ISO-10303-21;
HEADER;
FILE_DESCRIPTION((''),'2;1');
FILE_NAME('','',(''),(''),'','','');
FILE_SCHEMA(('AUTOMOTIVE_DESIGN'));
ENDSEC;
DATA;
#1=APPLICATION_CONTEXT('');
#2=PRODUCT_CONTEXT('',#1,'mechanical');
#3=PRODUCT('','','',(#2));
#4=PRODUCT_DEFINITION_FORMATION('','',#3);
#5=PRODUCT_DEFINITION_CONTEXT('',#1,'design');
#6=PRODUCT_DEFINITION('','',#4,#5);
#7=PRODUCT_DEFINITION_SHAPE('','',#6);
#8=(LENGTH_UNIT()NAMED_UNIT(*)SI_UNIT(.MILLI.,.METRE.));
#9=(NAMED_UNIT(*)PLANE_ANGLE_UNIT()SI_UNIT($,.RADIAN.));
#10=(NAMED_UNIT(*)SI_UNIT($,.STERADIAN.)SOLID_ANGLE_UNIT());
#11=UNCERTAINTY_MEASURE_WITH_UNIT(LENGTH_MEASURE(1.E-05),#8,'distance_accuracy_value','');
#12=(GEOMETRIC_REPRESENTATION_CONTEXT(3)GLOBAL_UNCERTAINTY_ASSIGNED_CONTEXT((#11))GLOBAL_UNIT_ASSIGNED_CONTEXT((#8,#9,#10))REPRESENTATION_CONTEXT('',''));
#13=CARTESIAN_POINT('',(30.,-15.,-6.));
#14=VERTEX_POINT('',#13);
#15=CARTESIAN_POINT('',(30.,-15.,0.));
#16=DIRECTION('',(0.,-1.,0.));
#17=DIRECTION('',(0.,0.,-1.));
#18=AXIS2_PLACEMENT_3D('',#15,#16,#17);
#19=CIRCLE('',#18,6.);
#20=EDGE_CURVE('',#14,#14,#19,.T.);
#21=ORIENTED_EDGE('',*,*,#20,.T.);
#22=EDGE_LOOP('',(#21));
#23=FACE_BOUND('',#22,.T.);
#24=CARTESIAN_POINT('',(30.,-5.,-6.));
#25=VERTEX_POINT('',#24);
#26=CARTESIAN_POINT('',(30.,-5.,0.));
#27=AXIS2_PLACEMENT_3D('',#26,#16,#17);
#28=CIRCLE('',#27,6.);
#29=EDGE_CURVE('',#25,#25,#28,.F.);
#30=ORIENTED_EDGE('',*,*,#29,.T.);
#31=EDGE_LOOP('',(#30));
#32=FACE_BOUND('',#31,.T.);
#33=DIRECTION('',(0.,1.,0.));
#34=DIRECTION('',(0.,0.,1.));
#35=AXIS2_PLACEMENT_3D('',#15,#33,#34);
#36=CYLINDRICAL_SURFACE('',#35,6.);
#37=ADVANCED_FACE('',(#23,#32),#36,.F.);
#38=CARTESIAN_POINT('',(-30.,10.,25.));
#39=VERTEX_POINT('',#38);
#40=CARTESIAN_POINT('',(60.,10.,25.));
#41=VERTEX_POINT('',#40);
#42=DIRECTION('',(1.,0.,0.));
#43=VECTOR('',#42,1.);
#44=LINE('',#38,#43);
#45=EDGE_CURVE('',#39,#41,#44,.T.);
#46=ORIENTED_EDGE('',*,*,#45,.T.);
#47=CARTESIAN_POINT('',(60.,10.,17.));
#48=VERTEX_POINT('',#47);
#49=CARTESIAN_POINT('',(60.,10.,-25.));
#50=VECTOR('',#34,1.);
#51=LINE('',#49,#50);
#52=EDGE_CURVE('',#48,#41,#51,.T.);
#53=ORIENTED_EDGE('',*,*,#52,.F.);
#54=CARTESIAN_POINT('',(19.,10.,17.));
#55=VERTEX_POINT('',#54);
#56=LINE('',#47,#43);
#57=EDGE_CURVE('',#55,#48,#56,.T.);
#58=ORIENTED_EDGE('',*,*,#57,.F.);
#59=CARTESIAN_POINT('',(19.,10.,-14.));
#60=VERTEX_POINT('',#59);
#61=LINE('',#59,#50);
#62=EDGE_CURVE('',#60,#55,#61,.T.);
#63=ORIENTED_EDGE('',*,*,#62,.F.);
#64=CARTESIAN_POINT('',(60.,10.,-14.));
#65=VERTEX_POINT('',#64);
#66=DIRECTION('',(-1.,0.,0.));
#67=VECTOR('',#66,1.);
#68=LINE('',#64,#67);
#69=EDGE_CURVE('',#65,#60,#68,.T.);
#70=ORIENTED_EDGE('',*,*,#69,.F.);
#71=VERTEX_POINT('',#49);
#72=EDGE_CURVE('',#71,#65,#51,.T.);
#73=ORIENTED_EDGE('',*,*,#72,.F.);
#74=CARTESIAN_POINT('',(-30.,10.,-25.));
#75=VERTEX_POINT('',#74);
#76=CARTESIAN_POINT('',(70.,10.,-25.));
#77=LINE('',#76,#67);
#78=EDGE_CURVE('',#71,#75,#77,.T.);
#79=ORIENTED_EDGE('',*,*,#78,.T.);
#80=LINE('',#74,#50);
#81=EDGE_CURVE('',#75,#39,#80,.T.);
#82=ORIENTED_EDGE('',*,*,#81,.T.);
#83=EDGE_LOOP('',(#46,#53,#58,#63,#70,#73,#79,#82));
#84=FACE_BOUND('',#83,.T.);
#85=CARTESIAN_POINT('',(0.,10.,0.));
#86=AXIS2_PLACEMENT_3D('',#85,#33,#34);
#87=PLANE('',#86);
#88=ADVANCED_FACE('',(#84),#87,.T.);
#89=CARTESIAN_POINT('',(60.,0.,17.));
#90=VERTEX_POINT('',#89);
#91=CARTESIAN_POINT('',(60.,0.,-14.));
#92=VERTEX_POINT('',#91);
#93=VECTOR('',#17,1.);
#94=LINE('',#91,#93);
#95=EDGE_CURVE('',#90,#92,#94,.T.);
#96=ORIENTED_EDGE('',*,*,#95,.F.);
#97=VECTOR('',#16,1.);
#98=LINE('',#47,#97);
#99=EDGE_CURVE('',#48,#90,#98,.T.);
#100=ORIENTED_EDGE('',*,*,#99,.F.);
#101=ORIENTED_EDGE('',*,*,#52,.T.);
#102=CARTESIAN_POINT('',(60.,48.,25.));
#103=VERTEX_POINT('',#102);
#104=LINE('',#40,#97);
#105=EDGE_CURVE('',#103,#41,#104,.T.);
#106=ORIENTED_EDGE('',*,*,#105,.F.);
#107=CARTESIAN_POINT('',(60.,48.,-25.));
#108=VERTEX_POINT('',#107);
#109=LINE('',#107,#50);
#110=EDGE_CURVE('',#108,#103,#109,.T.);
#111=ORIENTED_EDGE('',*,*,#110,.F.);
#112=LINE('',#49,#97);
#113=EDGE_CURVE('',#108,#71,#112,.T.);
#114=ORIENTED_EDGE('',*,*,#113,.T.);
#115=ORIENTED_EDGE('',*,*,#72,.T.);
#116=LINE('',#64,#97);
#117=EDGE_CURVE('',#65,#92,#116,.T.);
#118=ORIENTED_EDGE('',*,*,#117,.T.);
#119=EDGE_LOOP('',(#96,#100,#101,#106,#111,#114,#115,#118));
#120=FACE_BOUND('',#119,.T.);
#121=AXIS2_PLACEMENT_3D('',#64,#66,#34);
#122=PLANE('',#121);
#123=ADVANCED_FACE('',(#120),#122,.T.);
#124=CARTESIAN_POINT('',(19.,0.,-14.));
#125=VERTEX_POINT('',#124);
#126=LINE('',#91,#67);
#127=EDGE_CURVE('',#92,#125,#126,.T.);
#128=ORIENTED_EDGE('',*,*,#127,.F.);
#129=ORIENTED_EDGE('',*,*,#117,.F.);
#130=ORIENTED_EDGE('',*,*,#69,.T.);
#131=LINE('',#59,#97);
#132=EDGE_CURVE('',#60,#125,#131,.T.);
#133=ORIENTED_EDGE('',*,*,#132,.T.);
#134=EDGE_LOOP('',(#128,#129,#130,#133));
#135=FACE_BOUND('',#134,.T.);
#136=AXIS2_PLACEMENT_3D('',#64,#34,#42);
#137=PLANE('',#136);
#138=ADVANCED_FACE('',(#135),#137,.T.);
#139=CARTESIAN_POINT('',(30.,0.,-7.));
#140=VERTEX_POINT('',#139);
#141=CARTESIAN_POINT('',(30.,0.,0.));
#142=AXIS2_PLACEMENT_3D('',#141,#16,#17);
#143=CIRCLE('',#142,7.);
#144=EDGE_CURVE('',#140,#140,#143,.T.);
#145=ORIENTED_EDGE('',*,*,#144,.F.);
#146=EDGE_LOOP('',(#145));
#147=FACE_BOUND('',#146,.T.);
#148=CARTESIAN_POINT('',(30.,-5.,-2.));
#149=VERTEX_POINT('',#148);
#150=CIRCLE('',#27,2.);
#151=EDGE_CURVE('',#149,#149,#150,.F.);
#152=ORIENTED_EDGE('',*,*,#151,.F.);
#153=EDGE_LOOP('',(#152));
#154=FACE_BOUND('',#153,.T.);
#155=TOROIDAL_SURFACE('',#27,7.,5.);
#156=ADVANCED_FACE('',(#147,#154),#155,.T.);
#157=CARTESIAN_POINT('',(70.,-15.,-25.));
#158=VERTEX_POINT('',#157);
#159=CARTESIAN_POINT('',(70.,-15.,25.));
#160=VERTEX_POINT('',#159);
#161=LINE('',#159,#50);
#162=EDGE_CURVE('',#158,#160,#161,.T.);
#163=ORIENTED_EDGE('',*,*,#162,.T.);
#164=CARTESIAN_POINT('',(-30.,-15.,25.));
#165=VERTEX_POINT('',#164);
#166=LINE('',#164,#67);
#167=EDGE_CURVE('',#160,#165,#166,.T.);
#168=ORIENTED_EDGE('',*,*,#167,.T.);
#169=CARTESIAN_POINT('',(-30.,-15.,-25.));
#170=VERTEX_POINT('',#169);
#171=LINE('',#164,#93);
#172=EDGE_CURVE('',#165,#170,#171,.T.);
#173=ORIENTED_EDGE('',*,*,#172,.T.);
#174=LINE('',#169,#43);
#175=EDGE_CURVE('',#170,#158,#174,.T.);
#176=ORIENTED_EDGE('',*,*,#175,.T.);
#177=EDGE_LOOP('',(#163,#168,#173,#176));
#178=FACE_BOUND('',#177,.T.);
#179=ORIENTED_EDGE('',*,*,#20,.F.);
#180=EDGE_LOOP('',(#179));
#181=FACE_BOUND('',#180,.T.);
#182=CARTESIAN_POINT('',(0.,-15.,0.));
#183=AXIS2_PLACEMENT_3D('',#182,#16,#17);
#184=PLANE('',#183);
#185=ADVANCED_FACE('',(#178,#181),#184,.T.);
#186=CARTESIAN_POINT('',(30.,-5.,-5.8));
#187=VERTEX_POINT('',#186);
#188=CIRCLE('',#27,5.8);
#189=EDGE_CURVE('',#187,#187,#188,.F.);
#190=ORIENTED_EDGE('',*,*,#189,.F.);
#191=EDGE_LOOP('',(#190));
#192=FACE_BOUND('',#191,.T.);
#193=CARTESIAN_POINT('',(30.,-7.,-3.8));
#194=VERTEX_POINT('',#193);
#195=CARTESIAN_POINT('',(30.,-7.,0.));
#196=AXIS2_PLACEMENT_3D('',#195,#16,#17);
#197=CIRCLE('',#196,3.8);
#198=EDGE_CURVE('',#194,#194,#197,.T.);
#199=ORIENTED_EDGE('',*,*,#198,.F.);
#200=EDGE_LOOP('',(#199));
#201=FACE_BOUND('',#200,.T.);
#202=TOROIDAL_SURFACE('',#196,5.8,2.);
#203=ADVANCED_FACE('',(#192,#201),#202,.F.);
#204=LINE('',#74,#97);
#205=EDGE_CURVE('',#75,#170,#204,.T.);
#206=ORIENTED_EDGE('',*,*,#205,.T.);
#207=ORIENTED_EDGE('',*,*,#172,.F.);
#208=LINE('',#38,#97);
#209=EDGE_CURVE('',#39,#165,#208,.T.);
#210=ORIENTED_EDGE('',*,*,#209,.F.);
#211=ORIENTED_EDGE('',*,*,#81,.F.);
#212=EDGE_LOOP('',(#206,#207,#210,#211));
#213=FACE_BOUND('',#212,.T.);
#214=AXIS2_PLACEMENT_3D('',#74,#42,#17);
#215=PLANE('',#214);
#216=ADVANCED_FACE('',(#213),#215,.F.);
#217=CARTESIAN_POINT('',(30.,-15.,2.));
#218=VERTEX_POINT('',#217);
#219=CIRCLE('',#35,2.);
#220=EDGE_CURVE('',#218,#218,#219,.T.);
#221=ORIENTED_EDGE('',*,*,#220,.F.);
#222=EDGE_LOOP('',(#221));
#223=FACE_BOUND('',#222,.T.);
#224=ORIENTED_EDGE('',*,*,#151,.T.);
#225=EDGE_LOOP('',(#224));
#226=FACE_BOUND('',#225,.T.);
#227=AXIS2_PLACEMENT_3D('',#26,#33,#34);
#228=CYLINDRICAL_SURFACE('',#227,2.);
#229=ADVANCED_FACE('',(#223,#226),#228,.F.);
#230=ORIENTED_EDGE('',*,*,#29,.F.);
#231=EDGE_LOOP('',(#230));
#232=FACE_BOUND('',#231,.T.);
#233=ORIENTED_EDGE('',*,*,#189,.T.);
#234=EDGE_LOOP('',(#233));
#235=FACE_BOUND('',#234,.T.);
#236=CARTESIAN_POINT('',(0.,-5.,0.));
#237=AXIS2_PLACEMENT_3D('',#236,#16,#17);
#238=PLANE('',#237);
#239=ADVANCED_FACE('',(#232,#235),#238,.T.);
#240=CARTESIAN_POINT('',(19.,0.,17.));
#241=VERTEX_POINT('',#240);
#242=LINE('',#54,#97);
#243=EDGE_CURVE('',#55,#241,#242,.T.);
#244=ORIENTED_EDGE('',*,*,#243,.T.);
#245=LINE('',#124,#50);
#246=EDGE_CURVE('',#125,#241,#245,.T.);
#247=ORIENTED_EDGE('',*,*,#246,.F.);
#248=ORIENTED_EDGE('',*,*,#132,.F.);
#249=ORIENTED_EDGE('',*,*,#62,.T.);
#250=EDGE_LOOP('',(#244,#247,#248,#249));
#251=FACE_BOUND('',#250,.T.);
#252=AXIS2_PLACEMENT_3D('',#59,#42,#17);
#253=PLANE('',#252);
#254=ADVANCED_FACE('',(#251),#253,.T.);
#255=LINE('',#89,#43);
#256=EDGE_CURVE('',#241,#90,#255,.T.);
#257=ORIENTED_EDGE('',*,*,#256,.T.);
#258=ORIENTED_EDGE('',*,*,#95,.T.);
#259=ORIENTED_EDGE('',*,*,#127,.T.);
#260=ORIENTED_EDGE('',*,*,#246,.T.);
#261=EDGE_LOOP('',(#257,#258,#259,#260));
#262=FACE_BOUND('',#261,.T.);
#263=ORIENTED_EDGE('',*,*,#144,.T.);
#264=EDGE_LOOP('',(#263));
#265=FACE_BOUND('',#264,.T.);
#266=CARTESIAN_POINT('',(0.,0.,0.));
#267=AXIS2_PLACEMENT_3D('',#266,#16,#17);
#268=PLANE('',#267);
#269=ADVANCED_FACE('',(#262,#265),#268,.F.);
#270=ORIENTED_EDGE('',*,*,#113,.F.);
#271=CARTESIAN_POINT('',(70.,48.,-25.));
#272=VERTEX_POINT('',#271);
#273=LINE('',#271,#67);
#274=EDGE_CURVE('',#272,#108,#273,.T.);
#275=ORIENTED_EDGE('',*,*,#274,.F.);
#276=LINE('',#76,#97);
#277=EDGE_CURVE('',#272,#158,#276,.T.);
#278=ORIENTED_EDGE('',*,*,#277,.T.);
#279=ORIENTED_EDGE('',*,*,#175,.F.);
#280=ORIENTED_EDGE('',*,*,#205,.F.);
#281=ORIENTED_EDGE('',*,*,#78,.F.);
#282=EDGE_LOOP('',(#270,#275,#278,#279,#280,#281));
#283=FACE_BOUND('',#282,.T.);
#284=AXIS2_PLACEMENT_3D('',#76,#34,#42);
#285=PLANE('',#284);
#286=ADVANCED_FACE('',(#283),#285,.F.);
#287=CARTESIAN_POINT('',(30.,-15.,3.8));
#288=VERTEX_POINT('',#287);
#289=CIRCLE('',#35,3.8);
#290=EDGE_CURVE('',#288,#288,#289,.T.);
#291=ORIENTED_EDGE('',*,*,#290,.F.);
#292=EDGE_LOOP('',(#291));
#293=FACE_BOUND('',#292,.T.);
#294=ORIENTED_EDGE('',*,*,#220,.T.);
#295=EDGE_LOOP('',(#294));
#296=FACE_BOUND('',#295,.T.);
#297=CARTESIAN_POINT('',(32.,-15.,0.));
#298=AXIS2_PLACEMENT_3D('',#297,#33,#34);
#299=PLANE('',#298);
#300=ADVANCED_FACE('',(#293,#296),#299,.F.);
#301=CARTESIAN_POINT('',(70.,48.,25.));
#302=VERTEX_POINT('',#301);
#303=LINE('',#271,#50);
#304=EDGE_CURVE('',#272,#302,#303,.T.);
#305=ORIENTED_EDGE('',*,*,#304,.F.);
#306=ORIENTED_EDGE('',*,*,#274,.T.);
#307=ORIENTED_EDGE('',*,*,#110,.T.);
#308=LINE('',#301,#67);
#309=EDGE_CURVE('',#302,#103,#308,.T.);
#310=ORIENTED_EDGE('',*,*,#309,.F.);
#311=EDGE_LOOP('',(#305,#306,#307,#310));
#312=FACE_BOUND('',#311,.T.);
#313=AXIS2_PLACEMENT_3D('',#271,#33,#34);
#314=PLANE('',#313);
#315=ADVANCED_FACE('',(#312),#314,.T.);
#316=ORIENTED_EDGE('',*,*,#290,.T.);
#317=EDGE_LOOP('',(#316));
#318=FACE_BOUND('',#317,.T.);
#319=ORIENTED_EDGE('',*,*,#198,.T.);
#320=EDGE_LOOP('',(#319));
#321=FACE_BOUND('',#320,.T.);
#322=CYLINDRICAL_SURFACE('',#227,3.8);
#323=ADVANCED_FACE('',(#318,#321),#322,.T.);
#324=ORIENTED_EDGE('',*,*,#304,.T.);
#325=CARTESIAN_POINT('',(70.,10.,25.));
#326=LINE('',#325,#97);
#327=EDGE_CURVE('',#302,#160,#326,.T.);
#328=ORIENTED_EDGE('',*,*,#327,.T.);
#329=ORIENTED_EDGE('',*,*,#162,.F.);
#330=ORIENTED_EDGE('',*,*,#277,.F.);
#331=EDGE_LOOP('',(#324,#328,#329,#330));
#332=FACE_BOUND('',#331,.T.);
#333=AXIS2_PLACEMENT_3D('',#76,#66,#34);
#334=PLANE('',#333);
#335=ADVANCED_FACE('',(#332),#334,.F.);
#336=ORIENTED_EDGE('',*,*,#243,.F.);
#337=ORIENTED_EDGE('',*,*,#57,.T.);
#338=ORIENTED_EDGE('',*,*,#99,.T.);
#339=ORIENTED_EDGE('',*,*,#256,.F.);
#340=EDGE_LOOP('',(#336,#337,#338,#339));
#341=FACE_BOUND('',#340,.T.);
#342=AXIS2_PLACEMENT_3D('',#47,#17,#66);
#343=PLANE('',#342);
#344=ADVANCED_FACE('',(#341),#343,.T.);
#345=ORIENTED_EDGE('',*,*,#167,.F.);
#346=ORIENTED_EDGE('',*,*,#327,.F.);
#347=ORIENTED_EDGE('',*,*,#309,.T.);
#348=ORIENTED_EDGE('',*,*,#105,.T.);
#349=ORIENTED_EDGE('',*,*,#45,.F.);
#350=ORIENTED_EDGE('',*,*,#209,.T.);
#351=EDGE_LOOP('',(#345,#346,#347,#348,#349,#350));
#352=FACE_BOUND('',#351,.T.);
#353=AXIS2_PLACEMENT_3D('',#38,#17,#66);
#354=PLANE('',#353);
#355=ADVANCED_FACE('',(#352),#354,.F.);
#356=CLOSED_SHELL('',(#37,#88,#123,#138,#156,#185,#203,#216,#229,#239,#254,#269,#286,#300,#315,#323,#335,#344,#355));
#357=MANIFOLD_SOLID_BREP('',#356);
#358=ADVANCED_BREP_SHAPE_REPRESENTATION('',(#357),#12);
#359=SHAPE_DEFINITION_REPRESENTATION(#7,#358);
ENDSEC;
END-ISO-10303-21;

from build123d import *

# Parameters (mm, degrees)
SKETCH1_W           = 100
SKETCH1_H           = 50
SKETCH1_W_2         = 41
SKETCH1_H_2         = 31
BOSS_EXTRUDE1_DEPTH = 10
SKETCH2_W           = 10
SKETCH2_H           = 38
BOSS_EXTRUDE2_DEPTH = 50
SKETCH10_W          = 100
SKETCH10_H          = 50
SKETCH10_R          = 2
BOSS_EXTRUDE6_DEPTH = 5
SKETCH12_W          = 1.8
SKETCH12_H          = 10
FILLET4_R           = 2
SKETCH13_W          = 100
SKETCH13_H          = 50
SKETCH13_R          = 6
BOSS_EXTRUDE7_DEPTH = 10
FILLET5_R           = 5


with BuildPart() as part:
    # Sketch1 → Boss-Extrude1 (new body)
    with BuildSketch(Plane(origin=(0, 0, 0), x_dir=(1, 0, 0), z_dir=(0, 1, 0))):
        with Locations((20, 0)):
            Rectangle(SKETCH1_W, SKETCH1_H)
        with Locations((39.5, -1.5)):
            Rectangle(SKETCH1_W_2, SKETCH1_H_2, mode=Mode.SUBTRACT)
    extrude(amount=BOSS_EXTRUDE1_DEPTH)

    # Sketch2 → Boss-Extrude2 (add)
    with BuildSketch(Plane.XY.offset(25)):
        with Locations((65, 29)):
            Rectangle(SKETCH2_W, SKETCH2_H)
    extrude(amount=-BOSS_EXTRUDE2_DEPTH)

    # Sketch10 → Boss-Extrude6 (add)
    with BuildSketch(Plane.XZ):
        with Locations((20, 0)):
            Rectangle(SKETCH10_W, SKETCH10_H)
        with Locations((30, 0)):
            Circle(SKETCH10_R, mode=Mode.SUBTRACT)
    extrude(amount=BOSS_EXTRUDE6_DEPTH)

    # Sketch12 → Revolve3 (revolve)
    with BuildSketch(Plane.XY):
        with Locations((32.9, -10)):
            Rectangle(SKETCH12_W, SKETCH12_H)
    revolve(axis=Axis((30, -5, 0), (0, -1, 0)))

    # Fillet4
    fillet4_edges = [part.edges().sort_by_distance(p)[0] for p in [
        (26.2, -5, 0),
    ]]
    fillet(fillet4_edges, radius=FILLET4_R)

    # Sketch13 → Boss-Extrude7 (add)
    with BuildSketch(Plane.XZ.offset(5)):
        with Locations((20, 0)):
            Rectangle(SKETCH13_W, SKETCH13_H)
        with Locations((30, 0)):
            Circle(SKETCH13_R, mode=Mode.SUBTRACT)
    extrude(amount=BOSS_EXTRUDE7_DEPTH)

    # Fillet5
    fillet5_edges = [part.edges().sort_by_distance(p)[0] for p in [
        (28, 0, 0),
    ]]
    fillet(fillet5_edges, radius=FILLET5_R)


solid = part.part
